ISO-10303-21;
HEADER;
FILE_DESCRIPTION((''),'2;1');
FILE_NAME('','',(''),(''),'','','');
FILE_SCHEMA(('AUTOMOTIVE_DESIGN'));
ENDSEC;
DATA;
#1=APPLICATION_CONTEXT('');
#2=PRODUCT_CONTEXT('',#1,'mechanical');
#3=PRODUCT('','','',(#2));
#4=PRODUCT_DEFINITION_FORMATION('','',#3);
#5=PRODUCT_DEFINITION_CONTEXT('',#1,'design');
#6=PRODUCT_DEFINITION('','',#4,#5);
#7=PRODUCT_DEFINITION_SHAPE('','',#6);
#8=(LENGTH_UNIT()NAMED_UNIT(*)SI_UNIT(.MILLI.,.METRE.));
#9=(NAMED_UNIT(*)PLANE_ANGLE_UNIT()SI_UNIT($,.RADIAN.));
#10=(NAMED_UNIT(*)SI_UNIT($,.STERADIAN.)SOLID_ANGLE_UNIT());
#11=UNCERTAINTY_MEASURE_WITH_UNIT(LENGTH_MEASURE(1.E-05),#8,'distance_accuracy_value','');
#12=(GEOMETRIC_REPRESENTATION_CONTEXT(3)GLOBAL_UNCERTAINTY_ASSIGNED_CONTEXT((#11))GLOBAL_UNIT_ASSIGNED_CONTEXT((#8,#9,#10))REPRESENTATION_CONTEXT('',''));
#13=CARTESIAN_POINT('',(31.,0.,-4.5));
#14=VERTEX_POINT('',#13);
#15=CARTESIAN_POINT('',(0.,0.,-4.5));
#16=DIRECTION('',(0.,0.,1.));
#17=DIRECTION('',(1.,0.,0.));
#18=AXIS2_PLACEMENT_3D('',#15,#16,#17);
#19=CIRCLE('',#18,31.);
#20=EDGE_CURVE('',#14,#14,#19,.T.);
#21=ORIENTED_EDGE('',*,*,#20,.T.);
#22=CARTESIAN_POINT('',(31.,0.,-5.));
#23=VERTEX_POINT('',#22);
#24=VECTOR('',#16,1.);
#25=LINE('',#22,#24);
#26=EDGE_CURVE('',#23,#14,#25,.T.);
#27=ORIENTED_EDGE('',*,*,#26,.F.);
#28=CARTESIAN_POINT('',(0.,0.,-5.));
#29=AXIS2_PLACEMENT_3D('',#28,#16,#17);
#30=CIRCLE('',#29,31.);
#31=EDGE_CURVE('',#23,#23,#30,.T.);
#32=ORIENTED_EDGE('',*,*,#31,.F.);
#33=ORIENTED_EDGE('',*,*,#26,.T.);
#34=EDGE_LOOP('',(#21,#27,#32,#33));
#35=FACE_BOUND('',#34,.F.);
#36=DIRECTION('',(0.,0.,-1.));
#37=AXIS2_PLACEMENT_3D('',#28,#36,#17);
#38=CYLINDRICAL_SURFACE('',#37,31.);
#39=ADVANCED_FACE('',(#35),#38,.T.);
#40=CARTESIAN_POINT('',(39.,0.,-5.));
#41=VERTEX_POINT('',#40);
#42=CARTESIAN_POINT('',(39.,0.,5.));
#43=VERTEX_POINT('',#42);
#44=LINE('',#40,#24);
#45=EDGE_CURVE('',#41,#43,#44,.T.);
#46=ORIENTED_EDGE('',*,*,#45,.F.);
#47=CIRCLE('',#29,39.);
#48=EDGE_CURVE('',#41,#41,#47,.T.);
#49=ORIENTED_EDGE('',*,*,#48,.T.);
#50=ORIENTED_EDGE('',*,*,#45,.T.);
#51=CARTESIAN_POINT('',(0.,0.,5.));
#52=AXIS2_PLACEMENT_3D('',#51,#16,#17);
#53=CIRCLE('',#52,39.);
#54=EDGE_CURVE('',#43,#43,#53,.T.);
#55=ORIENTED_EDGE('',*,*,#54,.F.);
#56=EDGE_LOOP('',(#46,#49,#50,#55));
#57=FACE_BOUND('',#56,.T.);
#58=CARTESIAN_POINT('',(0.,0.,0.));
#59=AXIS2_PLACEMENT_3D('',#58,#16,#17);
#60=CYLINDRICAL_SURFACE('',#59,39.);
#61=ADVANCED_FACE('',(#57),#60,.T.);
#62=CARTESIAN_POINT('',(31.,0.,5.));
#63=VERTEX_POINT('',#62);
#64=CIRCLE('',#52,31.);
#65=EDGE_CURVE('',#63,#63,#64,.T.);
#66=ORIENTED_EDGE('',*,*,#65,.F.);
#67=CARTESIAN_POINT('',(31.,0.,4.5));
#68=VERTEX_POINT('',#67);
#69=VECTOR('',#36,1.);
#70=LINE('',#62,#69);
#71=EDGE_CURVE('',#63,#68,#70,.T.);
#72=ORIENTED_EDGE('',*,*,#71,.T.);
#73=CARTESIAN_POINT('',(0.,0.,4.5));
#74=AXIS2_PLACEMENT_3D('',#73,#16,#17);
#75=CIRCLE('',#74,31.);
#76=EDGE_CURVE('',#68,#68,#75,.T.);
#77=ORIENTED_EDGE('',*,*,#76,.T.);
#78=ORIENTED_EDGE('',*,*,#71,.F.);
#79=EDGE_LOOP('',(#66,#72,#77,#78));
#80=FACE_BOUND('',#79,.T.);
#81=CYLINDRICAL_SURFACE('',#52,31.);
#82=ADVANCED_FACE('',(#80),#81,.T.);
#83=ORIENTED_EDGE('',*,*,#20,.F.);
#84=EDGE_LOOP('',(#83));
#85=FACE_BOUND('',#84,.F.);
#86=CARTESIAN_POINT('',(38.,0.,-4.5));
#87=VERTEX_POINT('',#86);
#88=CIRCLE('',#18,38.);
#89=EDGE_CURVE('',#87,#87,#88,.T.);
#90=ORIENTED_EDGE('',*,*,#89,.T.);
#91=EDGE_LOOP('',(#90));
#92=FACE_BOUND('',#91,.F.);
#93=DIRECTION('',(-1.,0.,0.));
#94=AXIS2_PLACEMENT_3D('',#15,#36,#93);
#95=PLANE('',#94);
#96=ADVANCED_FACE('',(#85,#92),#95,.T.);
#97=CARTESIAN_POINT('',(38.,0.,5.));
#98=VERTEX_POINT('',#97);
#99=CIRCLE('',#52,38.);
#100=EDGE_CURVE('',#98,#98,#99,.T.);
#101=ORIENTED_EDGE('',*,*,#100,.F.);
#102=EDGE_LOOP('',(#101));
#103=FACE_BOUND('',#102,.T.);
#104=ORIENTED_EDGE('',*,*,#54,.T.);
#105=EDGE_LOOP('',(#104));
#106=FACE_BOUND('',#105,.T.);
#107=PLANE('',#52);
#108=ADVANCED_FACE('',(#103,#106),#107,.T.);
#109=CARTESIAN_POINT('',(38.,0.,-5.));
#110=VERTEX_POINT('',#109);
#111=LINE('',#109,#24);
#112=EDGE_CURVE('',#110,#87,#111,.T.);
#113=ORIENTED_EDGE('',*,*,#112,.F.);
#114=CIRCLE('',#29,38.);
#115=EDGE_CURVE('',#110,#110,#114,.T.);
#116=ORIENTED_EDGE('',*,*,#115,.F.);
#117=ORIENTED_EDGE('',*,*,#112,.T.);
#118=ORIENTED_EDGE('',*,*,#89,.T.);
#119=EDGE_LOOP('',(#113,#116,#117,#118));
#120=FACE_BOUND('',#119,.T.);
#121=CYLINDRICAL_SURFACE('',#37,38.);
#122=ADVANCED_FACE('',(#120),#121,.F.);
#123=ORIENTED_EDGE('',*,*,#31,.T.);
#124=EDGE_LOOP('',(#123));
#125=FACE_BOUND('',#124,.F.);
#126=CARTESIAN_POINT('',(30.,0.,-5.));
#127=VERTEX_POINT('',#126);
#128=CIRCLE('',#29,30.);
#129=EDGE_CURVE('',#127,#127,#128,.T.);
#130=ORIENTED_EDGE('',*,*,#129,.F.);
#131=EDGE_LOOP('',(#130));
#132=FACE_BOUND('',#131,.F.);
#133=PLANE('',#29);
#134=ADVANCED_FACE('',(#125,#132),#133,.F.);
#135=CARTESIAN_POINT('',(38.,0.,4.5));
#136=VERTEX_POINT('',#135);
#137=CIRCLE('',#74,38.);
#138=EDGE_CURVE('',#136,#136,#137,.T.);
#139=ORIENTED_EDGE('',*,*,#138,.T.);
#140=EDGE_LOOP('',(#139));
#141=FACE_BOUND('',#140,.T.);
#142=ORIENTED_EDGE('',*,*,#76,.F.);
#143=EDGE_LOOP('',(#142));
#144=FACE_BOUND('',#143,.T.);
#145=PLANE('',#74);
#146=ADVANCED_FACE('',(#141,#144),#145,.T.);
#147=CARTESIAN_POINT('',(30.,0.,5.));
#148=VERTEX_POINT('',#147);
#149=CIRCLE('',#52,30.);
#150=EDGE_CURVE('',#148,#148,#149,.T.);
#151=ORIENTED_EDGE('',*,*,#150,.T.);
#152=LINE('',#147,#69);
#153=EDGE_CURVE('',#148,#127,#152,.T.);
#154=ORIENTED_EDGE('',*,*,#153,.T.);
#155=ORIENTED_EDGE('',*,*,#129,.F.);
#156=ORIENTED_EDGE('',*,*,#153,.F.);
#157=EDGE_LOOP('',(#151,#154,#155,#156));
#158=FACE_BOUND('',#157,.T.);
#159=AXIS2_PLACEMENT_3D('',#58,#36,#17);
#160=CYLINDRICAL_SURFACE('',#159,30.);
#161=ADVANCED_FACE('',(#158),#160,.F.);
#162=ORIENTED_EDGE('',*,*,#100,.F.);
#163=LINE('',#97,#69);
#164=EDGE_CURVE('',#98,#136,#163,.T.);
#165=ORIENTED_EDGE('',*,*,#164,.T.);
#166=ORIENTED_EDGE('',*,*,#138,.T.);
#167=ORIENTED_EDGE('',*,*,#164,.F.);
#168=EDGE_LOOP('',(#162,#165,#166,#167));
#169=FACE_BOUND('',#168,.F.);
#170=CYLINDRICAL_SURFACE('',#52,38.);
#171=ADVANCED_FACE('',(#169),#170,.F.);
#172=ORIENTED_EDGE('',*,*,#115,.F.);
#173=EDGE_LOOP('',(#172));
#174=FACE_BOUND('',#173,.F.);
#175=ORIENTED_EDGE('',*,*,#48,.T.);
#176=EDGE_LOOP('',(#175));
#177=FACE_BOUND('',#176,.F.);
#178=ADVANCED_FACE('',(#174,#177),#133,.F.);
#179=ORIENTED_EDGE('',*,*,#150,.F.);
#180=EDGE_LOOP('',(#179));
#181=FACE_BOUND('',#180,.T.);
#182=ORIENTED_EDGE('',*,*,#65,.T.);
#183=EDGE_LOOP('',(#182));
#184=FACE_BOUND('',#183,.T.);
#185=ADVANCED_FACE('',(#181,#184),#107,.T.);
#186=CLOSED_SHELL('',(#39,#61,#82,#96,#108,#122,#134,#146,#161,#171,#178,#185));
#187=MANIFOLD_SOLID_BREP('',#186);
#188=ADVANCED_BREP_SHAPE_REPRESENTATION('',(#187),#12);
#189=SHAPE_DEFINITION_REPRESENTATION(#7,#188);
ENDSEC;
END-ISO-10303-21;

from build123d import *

# Parameters (mm, degrees)
F0_R     = 39
F0_R_2   = 30
F1_DEPTH = 5
F2_R     = 38
F2_R_2   = 31
F3_DEPTH = 0.5


# Not quite as in the source:
# - a pattern or mirror of a feature is missing from the dataset's text; its kind, count and spacing are read off the source's solid


with BuildPart() as f1:
    # F0 (on Top) → F1 (new body, symmetric)
    with BuildSketch(Plane.XY):
        Circle(F0_R)
        Circle(F0_R_2, mode=Mode.SUBTRACT)
    extrude(amount=F1_DEPTH, both=True)

    # F2 (on face) → F3 (cut)
    with BuildSketch(Plane.XY.offset(5)):
        Circle(F2_R)
        Circle(F2_R_2, mode=Mode.SUBTRACT)
    f3 = extrude(amount=-F3_DEPTH, mode=Mode.SUBTRACT)

    # F3_copies: F3 across plane
    add(f3.mirror(Plane(origin=(0, 0, 0), x_dir=(-1, 0, 0), z_dir=(0, 0, -1))), mode=Mode.SUBTRACT)


solid = f1.part
